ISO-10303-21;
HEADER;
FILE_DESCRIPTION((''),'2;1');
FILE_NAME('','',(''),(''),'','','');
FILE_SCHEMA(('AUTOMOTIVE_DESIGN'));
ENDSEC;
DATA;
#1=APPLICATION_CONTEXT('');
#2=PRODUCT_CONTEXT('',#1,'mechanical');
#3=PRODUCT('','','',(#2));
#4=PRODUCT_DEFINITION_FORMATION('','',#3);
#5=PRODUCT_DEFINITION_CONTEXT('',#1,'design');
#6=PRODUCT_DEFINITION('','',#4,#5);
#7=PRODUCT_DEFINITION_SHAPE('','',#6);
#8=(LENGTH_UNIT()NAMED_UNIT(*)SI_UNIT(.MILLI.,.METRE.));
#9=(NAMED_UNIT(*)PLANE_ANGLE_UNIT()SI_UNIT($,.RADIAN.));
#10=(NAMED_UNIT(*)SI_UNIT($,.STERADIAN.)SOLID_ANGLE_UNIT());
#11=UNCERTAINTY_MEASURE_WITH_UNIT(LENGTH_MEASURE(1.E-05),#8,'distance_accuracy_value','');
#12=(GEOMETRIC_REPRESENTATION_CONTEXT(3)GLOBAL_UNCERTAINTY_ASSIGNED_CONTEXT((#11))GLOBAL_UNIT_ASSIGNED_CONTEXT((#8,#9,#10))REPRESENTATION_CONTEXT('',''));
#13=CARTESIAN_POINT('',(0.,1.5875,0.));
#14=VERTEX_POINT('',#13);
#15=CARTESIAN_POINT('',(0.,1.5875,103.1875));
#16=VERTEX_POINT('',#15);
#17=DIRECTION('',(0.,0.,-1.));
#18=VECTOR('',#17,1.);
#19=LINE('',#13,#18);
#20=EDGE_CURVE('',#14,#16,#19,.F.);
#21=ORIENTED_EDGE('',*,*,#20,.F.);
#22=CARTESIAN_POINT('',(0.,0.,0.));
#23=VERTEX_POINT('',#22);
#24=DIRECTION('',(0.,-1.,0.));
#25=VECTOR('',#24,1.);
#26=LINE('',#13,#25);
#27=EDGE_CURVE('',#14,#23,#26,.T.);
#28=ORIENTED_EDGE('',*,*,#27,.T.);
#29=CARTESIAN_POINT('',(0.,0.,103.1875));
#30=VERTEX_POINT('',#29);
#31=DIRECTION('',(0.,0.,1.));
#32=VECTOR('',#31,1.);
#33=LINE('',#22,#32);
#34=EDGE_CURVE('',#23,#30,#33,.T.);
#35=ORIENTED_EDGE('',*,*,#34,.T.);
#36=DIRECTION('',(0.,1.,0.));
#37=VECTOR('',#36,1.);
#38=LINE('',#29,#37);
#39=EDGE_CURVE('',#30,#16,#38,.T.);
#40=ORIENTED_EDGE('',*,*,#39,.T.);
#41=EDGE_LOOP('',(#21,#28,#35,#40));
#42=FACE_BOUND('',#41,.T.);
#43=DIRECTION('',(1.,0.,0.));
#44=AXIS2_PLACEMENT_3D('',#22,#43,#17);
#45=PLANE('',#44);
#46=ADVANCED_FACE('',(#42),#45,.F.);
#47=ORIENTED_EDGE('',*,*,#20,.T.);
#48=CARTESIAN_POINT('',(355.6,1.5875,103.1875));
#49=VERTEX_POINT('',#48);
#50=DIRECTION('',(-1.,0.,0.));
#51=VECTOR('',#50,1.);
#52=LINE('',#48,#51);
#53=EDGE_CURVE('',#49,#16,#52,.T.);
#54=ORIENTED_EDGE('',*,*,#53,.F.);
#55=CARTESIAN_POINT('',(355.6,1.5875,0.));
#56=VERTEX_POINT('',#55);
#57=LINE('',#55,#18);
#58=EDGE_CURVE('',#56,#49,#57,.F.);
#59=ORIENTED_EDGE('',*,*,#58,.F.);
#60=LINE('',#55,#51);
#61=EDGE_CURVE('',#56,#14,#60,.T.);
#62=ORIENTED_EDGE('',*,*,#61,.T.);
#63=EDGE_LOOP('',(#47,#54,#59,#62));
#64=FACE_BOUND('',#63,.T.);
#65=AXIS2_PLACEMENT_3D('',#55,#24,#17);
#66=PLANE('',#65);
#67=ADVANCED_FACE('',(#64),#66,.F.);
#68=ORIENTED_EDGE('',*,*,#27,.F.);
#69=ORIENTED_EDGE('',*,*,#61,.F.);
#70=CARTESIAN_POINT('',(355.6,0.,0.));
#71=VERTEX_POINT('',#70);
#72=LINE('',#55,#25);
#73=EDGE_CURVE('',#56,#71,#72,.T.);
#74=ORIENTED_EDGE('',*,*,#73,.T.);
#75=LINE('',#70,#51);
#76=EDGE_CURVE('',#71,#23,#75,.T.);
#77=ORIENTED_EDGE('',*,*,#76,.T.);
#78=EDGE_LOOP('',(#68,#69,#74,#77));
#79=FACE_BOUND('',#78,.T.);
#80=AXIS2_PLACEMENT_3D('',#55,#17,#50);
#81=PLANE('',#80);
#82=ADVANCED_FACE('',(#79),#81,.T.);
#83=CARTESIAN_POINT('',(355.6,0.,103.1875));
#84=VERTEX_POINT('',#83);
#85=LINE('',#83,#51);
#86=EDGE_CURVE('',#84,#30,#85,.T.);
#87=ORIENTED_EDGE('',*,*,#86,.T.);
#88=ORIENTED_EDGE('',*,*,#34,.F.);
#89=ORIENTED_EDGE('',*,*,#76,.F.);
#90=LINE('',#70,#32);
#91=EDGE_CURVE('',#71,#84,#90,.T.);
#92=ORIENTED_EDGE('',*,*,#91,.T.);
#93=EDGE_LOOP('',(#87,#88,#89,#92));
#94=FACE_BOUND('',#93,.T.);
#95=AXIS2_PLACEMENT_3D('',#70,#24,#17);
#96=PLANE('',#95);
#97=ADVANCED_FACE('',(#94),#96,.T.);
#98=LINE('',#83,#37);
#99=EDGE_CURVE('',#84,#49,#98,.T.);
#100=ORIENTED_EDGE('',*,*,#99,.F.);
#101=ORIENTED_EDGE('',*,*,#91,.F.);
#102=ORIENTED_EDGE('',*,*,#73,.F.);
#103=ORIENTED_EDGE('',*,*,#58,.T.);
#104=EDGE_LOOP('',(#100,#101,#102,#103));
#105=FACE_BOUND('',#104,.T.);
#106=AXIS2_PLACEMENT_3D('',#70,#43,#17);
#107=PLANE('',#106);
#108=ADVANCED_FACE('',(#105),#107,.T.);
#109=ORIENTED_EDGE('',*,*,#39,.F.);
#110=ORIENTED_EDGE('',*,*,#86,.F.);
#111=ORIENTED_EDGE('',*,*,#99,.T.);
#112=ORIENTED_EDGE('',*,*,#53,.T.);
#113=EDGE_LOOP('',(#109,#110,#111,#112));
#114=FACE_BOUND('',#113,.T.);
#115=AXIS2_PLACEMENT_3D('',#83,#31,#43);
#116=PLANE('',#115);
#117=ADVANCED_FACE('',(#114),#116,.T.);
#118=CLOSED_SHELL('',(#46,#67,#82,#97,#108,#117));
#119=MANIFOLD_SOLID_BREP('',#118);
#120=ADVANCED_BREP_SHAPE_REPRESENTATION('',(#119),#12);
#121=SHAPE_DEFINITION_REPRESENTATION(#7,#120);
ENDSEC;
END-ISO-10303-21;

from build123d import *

# Parameters (mm, degrees)
SKETCH1_W          = 103.1875
SKETCH1_H          = 1.5875
BASE_FLANGE1_DEPTH = 355.6


# Sheet-metal steps are written as plain solids
with BuildPart() as part:
    # Sketch1 → Base-Flange1 (new body)
    with BuildSketch(Plane(origin=(0, 0, 0), x_dir=(0, 0, -1), z_dir=(1, 0, 0))):
        with Locations((-51.59375, 0.79375)):
            Rectangle(SKETCH1_W, SKETCH1_H)
    extrude(amount=BASE_FLANGE1_DEPTH)


solid = part.part
